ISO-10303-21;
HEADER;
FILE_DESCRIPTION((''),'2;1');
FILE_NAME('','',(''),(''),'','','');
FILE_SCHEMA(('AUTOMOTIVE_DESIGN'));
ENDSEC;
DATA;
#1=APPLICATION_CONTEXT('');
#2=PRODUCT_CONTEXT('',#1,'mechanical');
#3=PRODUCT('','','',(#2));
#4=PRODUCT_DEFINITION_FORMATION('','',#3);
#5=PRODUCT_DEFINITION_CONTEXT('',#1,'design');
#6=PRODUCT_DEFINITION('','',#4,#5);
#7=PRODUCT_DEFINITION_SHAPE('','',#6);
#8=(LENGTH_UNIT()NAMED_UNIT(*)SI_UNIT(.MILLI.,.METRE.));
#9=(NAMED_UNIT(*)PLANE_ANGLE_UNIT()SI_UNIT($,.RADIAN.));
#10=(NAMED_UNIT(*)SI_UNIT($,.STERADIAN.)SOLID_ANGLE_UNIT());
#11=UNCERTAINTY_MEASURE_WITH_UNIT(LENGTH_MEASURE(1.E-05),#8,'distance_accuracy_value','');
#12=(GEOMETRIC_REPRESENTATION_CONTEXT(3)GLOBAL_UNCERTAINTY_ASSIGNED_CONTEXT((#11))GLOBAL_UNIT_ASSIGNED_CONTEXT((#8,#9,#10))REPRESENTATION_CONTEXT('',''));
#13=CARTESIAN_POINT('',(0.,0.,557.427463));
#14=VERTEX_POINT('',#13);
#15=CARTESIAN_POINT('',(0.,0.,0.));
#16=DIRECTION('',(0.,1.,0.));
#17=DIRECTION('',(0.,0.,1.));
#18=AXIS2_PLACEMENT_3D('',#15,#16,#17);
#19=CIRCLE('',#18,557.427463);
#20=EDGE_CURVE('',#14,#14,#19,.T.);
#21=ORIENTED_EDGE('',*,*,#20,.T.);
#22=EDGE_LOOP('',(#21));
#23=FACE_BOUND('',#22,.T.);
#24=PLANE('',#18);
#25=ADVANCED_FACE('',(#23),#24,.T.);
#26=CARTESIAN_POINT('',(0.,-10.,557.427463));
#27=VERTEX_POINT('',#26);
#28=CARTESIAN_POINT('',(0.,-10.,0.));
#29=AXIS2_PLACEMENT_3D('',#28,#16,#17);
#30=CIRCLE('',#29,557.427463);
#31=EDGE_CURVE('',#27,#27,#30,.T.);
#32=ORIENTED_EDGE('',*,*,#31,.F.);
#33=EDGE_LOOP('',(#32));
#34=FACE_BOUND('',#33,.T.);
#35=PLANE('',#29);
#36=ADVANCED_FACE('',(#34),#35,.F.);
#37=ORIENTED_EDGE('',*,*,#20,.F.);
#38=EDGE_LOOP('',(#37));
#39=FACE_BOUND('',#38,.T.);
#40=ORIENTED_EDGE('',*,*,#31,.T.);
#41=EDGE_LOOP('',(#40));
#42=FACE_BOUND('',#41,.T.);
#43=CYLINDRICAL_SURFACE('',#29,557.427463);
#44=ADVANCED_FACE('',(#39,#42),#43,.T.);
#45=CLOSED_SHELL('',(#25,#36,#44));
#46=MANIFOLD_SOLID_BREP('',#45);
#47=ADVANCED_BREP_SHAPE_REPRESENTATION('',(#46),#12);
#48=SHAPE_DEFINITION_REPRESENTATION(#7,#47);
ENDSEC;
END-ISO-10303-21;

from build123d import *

# Parameters (mm, degrees)
EXTRUDE_START       = -10
EXTRUDE_1_OUTLINE_R = 557.427463001
EXTRUDE_1_DEPTH     = 10


# Read off the part's stored shape, not the designer's step: 凸台-拉伸1
with BuildPart() as part:
    # 凸台-拉伸1 outline → 凸台-拉伸1 (new body)
    with BuildSketch(Plane(origin=(0, 0, 0), x_dir=(1, 0, 0), z_dir=(0, 1, 0)).offset(EXTRUDE_START)):
        Circle(EXTRUDE_1_OUTLINE_R)
    extrude(amount=EXTRUDE_1_DEPTH)


solid = part.part
